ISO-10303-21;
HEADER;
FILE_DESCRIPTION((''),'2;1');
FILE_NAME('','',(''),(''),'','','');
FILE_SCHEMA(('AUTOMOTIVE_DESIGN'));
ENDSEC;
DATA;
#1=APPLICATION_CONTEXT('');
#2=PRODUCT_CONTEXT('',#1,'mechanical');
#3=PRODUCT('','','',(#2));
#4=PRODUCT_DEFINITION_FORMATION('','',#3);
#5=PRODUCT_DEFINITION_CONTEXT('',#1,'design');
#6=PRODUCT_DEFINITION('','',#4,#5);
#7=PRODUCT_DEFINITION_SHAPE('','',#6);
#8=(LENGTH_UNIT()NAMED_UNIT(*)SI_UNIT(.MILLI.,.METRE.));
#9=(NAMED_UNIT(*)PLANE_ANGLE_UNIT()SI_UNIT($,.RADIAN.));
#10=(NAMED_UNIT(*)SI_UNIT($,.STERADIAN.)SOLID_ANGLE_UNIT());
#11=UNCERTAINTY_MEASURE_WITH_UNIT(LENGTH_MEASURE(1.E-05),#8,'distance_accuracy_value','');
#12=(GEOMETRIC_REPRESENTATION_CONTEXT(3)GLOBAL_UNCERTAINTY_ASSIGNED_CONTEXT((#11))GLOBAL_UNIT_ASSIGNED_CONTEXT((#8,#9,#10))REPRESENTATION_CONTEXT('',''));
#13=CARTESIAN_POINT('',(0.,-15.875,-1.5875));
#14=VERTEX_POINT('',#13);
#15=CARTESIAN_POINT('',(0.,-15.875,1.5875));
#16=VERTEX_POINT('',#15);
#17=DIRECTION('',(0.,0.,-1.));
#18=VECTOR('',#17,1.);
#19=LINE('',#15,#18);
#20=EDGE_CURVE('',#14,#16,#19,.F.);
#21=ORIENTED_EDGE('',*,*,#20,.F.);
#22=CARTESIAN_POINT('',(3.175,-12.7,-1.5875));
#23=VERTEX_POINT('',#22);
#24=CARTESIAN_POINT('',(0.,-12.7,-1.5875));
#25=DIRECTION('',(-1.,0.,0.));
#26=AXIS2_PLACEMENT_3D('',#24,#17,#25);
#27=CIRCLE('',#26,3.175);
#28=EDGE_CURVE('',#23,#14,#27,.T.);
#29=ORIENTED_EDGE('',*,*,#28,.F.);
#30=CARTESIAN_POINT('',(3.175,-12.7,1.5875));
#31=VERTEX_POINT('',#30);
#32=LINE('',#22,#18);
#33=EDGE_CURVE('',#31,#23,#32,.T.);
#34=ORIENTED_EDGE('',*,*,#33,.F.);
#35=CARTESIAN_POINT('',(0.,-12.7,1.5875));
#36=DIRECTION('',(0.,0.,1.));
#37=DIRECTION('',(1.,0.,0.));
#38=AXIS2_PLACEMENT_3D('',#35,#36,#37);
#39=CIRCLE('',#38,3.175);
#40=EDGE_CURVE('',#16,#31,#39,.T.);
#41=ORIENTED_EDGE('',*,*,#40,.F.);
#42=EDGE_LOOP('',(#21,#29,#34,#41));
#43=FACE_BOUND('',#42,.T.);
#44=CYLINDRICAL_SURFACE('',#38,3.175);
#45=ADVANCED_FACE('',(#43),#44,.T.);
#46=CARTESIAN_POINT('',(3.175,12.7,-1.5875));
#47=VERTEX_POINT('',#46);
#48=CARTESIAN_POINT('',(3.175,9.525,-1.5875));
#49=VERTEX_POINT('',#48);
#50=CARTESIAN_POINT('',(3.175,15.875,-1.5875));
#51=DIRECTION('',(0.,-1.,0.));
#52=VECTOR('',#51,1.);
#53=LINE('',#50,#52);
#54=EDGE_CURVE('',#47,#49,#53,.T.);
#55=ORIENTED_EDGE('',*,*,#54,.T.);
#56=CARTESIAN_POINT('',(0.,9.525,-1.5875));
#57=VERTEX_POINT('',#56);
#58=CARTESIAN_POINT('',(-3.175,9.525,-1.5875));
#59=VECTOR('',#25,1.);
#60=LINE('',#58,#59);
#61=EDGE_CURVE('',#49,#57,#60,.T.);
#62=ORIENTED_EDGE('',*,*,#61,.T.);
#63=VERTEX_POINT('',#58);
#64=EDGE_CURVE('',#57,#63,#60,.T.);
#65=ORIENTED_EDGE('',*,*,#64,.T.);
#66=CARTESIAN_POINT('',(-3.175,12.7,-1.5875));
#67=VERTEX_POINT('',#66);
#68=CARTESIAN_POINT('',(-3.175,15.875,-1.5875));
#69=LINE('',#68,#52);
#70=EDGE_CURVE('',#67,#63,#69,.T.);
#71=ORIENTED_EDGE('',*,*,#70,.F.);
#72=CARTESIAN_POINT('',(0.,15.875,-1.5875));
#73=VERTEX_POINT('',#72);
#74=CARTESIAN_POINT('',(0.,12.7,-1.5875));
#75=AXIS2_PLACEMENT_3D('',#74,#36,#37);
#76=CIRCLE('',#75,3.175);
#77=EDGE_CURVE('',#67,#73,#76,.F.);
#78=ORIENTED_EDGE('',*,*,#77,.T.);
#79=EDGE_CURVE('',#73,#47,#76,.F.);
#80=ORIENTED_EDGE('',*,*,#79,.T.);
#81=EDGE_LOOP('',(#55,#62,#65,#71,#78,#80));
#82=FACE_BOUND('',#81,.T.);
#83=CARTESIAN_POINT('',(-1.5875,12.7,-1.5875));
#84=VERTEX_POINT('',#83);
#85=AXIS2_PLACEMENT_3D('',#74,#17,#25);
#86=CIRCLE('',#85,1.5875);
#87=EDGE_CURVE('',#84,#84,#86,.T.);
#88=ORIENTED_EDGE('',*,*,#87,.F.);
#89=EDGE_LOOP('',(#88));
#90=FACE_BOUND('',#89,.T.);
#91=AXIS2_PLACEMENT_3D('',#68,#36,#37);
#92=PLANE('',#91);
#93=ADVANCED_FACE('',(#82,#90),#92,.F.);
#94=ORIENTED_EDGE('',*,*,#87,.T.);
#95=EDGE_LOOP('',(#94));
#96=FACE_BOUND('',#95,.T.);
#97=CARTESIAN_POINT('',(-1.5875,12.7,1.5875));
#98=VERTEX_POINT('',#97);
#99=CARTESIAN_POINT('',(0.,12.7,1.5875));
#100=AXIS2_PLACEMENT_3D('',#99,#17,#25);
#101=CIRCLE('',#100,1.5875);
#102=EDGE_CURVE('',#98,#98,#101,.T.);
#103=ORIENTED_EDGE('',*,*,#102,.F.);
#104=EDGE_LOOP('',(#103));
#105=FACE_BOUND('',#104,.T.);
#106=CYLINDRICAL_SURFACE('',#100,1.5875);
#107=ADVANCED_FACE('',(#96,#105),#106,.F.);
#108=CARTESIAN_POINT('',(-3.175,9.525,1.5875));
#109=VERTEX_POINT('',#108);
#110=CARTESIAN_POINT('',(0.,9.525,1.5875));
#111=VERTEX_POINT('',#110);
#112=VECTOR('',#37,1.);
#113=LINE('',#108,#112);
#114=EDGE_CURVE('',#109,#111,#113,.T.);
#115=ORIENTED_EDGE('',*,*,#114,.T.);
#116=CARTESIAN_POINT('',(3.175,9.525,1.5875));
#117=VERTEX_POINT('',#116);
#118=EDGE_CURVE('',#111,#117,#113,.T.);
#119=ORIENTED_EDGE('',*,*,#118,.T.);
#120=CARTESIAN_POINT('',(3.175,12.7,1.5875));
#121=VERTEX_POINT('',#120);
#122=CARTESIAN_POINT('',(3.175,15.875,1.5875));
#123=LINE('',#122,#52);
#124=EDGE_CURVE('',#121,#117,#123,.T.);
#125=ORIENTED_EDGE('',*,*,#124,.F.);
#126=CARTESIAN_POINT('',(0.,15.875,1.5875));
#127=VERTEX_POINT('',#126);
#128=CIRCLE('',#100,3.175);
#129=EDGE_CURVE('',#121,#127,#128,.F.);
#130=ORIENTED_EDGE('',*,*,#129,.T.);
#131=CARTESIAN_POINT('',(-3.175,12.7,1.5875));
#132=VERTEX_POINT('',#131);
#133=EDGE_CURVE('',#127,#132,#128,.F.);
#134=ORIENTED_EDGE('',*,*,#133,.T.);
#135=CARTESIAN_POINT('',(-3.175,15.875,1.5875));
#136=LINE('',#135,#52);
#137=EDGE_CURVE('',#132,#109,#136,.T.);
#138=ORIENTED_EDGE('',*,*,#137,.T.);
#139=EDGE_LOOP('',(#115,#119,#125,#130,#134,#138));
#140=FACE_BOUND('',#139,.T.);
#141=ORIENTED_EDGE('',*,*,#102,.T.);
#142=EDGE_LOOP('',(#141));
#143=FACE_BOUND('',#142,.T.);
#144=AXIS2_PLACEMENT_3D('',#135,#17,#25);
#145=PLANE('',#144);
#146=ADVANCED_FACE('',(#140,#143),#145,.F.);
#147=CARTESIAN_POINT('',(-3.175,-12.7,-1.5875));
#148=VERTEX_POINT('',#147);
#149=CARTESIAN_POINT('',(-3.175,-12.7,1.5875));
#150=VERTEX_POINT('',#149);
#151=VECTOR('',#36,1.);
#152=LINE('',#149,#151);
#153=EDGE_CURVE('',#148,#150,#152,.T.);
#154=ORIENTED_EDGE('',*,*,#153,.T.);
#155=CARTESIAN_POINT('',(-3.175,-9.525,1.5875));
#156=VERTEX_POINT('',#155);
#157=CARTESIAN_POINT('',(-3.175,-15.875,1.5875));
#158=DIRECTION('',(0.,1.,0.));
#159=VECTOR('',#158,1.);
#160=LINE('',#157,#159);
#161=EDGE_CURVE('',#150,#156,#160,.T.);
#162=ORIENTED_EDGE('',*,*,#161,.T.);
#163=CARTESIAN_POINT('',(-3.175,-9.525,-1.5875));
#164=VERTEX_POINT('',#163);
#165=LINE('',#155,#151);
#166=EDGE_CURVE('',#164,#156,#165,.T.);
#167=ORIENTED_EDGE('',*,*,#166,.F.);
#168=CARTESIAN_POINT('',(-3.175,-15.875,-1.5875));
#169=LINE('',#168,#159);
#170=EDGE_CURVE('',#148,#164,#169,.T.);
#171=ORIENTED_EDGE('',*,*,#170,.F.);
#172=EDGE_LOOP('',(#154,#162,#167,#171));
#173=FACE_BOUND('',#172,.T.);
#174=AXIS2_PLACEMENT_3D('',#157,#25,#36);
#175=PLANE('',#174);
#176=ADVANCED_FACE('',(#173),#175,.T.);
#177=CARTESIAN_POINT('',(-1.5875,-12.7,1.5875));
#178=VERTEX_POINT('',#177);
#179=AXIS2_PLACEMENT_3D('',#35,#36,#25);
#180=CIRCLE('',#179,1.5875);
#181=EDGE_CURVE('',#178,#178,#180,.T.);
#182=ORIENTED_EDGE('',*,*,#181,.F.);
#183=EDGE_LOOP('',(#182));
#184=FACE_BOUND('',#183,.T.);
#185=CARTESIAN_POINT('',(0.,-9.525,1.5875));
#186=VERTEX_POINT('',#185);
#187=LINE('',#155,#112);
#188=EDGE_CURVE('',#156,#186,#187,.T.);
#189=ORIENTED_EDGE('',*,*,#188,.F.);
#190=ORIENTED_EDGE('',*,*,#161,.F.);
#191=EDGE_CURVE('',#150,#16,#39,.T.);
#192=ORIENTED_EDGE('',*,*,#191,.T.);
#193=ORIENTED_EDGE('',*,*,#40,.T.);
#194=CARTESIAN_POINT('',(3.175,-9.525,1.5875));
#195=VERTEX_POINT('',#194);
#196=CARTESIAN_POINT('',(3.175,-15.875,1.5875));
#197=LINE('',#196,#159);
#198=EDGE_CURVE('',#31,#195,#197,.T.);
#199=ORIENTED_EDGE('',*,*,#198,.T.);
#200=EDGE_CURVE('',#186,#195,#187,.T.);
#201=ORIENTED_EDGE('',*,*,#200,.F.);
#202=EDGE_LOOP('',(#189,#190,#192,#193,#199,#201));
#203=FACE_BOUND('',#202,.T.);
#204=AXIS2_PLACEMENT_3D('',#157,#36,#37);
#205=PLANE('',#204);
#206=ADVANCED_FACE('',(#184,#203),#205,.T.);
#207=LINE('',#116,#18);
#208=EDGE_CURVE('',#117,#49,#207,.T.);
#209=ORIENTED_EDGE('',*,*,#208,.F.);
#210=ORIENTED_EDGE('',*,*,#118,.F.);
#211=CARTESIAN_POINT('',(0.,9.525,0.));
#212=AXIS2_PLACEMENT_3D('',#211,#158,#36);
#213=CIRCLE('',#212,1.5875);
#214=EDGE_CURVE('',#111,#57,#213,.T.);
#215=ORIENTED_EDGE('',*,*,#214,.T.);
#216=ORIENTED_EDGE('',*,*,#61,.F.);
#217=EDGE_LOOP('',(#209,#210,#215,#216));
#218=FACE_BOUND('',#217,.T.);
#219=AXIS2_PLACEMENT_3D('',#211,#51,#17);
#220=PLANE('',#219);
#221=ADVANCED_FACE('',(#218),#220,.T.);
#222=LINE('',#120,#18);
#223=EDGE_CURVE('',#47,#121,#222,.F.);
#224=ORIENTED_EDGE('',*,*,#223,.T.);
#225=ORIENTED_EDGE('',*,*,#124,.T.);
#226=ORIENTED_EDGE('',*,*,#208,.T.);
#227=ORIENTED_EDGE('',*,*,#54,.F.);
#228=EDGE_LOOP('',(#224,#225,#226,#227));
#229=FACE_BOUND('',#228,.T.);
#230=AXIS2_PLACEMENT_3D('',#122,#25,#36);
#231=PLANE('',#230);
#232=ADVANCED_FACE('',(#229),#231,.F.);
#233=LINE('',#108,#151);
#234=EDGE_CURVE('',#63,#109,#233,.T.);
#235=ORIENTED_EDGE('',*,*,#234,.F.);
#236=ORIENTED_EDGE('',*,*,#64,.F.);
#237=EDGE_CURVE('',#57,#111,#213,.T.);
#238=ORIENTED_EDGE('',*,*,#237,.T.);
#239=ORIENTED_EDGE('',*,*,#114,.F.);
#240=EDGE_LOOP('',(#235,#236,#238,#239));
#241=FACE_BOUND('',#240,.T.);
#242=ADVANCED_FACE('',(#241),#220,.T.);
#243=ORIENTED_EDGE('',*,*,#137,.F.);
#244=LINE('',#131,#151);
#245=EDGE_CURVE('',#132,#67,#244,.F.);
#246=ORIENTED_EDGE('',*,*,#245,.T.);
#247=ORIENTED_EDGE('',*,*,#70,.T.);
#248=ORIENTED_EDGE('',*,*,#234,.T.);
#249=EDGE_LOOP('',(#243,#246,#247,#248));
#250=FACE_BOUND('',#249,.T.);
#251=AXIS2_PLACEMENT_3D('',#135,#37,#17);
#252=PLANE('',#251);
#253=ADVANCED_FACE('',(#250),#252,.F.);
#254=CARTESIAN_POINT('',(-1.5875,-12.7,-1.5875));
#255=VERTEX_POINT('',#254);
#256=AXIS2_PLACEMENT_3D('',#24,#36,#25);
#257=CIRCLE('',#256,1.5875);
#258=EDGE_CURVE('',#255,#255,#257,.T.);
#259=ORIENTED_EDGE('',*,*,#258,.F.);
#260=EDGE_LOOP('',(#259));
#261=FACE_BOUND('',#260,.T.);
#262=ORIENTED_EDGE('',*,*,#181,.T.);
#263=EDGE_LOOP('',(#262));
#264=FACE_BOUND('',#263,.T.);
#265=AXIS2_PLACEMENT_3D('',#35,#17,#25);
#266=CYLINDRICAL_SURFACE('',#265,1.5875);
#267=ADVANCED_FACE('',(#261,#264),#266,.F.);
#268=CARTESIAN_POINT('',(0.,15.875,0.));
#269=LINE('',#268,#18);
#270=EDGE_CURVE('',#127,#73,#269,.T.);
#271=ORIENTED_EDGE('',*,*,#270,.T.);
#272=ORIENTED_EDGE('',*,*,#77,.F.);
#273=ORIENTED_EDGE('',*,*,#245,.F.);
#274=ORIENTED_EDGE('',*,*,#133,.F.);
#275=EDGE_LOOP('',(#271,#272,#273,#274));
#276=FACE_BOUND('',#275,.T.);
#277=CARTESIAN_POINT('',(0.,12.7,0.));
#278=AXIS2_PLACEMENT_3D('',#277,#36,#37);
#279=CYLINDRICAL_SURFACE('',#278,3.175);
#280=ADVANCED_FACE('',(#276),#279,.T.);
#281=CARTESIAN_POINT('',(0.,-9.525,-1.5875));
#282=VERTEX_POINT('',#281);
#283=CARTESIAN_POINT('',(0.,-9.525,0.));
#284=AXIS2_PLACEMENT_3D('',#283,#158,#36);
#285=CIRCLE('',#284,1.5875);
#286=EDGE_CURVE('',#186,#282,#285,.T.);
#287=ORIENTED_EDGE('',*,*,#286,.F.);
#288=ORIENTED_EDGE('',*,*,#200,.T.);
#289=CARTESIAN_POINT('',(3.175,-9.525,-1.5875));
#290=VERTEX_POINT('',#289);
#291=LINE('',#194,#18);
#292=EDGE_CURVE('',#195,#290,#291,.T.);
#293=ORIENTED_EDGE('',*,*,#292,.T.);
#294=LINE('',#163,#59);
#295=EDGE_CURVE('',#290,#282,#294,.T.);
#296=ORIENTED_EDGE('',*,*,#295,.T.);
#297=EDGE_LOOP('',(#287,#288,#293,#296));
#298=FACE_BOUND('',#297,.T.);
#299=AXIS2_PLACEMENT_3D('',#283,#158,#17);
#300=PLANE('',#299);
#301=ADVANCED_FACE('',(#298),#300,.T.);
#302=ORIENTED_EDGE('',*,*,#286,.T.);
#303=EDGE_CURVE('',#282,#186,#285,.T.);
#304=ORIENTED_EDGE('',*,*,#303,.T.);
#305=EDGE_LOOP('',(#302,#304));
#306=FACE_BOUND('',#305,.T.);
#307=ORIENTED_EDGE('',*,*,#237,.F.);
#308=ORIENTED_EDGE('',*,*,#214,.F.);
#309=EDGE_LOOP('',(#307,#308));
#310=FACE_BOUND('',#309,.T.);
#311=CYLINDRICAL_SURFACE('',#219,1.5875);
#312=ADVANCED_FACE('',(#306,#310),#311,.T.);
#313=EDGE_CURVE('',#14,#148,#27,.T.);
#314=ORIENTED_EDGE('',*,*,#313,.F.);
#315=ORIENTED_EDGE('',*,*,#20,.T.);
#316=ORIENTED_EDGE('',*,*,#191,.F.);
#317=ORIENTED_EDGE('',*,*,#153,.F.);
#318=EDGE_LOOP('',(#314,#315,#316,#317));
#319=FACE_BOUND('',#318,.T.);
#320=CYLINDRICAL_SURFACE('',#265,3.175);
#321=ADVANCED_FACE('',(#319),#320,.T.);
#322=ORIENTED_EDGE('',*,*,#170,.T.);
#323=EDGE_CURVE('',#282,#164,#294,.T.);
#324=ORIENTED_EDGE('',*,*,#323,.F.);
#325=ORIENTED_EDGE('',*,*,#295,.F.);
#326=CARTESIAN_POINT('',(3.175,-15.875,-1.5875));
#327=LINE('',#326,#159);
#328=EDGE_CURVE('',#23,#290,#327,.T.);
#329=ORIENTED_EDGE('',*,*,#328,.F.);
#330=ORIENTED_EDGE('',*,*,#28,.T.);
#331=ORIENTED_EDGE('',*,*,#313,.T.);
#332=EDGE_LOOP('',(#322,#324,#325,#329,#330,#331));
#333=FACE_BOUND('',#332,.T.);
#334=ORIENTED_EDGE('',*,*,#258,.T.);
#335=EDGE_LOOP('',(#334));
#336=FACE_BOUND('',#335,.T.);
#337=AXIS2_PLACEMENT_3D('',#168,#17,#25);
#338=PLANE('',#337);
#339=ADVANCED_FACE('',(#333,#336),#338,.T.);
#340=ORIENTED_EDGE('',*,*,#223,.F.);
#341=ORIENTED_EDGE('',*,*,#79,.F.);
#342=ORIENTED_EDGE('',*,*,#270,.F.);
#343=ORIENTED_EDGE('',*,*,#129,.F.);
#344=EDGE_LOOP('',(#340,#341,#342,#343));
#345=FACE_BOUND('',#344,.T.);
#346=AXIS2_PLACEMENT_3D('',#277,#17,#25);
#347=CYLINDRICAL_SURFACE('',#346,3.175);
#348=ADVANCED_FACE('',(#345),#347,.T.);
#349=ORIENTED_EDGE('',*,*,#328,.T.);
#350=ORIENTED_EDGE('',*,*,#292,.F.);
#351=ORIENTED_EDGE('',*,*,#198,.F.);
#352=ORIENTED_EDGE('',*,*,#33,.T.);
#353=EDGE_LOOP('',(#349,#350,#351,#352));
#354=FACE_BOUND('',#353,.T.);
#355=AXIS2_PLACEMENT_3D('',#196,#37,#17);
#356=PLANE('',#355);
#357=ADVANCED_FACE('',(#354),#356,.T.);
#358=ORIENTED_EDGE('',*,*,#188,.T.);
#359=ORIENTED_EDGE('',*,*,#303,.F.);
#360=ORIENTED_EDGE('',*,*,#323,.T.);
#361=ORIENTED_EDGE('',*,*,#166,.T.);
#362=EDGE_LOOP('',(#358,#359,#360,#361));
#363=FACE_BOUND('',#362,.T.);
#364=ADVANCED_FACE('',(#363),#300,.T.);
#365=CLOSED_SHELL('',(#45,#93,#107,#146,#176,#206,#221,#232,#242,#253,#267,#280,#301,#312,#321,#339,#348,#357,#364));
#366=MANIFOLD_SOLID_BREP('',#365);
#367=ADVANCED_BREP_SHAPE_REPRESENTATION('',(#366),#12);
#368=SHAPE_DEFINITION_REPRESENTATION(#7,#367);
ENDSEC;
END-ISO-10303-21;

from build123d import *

# Parameters (mm, degrees)
SKETCH1_R           = 1.5875
BOSS_EXTRUDE1_DEPTH = 9.525
SKETCH2_W           = 6.35
SKETCH2_H           = 3.175
BOSS_EXTRUDE2_DEPTH = 6.35
SKETCH3_R           = 1.5875
CUT_EXTRUDE1_DEPTH  = 17.497783942
FILLET1_R           = 3.175


with BuildPart() as part:
    # Sketch1 → Boss-Extrude1 (new body)
    with BuildSketch(Plane(origin=(0, 0, 0), x_dir=(1, 0, 0), z_dir=(0, 1, 0))):
        with Locations(Location((0, 0, 0), (0, 0, 90))):
            Circle(SKETCH1_R)
    boss_extrude1 = extrude(amount=BOSS_EXTRUDE1_DEPTH)

    # Sketch2 → Boss-Extrude2 (add)
    with BuildSketch(Plane(origin=(0, 9.525, 0), x_dir=(1, 0, 0), z_dir=(0, 1, 0))):
        Rectangle(SKETCH2_W, SKETCH2_H)
    boss_extrude2 = extrude(amount=BOSS_EXTRUDE2_DEPTH)

    # Sketch3 → Cut-Extrude1 (cut, through all)
    with BuildSketch(Plane(origin=(0, 0, -1.5875), x_dir=(-1, 0, 0), z_dir=(0, 0, -1))):
        with Locations((0, 12.7)):
            Circle(SKETCH3_R)
    cut_extrude1 = extrude(amount=-CUT_EXTRUDE1_DEPTH, mode=Mode.SUBTRACT)

    # Mirror1: Boss-Extrude1, Boss-Extrude2, Cut-Extrude1 across plane
    add(boss_extrude1.mirror(Plane.ZX))
    add(boss_extrude2.mirror(Plane.ZX))
    add(cut_extrude1.mirror(Plane.ZX), mode=Mode.SUBTRACT)

    # Fillet1
    fillet1_edges = [part.edges().sort_by_distance(p)[0] for p in [
        (-3.175, -15.875, 0),
        (3.175, -15.875, 0),
        (-3.175, 15.875, 0),
        (3.175, 15.875, 0),
    ]]
    fillet(fillet1_edges, radius=FILLET1_R - 0.0001)  # a hair under: the kernel refuses the full size


solid = part.part
